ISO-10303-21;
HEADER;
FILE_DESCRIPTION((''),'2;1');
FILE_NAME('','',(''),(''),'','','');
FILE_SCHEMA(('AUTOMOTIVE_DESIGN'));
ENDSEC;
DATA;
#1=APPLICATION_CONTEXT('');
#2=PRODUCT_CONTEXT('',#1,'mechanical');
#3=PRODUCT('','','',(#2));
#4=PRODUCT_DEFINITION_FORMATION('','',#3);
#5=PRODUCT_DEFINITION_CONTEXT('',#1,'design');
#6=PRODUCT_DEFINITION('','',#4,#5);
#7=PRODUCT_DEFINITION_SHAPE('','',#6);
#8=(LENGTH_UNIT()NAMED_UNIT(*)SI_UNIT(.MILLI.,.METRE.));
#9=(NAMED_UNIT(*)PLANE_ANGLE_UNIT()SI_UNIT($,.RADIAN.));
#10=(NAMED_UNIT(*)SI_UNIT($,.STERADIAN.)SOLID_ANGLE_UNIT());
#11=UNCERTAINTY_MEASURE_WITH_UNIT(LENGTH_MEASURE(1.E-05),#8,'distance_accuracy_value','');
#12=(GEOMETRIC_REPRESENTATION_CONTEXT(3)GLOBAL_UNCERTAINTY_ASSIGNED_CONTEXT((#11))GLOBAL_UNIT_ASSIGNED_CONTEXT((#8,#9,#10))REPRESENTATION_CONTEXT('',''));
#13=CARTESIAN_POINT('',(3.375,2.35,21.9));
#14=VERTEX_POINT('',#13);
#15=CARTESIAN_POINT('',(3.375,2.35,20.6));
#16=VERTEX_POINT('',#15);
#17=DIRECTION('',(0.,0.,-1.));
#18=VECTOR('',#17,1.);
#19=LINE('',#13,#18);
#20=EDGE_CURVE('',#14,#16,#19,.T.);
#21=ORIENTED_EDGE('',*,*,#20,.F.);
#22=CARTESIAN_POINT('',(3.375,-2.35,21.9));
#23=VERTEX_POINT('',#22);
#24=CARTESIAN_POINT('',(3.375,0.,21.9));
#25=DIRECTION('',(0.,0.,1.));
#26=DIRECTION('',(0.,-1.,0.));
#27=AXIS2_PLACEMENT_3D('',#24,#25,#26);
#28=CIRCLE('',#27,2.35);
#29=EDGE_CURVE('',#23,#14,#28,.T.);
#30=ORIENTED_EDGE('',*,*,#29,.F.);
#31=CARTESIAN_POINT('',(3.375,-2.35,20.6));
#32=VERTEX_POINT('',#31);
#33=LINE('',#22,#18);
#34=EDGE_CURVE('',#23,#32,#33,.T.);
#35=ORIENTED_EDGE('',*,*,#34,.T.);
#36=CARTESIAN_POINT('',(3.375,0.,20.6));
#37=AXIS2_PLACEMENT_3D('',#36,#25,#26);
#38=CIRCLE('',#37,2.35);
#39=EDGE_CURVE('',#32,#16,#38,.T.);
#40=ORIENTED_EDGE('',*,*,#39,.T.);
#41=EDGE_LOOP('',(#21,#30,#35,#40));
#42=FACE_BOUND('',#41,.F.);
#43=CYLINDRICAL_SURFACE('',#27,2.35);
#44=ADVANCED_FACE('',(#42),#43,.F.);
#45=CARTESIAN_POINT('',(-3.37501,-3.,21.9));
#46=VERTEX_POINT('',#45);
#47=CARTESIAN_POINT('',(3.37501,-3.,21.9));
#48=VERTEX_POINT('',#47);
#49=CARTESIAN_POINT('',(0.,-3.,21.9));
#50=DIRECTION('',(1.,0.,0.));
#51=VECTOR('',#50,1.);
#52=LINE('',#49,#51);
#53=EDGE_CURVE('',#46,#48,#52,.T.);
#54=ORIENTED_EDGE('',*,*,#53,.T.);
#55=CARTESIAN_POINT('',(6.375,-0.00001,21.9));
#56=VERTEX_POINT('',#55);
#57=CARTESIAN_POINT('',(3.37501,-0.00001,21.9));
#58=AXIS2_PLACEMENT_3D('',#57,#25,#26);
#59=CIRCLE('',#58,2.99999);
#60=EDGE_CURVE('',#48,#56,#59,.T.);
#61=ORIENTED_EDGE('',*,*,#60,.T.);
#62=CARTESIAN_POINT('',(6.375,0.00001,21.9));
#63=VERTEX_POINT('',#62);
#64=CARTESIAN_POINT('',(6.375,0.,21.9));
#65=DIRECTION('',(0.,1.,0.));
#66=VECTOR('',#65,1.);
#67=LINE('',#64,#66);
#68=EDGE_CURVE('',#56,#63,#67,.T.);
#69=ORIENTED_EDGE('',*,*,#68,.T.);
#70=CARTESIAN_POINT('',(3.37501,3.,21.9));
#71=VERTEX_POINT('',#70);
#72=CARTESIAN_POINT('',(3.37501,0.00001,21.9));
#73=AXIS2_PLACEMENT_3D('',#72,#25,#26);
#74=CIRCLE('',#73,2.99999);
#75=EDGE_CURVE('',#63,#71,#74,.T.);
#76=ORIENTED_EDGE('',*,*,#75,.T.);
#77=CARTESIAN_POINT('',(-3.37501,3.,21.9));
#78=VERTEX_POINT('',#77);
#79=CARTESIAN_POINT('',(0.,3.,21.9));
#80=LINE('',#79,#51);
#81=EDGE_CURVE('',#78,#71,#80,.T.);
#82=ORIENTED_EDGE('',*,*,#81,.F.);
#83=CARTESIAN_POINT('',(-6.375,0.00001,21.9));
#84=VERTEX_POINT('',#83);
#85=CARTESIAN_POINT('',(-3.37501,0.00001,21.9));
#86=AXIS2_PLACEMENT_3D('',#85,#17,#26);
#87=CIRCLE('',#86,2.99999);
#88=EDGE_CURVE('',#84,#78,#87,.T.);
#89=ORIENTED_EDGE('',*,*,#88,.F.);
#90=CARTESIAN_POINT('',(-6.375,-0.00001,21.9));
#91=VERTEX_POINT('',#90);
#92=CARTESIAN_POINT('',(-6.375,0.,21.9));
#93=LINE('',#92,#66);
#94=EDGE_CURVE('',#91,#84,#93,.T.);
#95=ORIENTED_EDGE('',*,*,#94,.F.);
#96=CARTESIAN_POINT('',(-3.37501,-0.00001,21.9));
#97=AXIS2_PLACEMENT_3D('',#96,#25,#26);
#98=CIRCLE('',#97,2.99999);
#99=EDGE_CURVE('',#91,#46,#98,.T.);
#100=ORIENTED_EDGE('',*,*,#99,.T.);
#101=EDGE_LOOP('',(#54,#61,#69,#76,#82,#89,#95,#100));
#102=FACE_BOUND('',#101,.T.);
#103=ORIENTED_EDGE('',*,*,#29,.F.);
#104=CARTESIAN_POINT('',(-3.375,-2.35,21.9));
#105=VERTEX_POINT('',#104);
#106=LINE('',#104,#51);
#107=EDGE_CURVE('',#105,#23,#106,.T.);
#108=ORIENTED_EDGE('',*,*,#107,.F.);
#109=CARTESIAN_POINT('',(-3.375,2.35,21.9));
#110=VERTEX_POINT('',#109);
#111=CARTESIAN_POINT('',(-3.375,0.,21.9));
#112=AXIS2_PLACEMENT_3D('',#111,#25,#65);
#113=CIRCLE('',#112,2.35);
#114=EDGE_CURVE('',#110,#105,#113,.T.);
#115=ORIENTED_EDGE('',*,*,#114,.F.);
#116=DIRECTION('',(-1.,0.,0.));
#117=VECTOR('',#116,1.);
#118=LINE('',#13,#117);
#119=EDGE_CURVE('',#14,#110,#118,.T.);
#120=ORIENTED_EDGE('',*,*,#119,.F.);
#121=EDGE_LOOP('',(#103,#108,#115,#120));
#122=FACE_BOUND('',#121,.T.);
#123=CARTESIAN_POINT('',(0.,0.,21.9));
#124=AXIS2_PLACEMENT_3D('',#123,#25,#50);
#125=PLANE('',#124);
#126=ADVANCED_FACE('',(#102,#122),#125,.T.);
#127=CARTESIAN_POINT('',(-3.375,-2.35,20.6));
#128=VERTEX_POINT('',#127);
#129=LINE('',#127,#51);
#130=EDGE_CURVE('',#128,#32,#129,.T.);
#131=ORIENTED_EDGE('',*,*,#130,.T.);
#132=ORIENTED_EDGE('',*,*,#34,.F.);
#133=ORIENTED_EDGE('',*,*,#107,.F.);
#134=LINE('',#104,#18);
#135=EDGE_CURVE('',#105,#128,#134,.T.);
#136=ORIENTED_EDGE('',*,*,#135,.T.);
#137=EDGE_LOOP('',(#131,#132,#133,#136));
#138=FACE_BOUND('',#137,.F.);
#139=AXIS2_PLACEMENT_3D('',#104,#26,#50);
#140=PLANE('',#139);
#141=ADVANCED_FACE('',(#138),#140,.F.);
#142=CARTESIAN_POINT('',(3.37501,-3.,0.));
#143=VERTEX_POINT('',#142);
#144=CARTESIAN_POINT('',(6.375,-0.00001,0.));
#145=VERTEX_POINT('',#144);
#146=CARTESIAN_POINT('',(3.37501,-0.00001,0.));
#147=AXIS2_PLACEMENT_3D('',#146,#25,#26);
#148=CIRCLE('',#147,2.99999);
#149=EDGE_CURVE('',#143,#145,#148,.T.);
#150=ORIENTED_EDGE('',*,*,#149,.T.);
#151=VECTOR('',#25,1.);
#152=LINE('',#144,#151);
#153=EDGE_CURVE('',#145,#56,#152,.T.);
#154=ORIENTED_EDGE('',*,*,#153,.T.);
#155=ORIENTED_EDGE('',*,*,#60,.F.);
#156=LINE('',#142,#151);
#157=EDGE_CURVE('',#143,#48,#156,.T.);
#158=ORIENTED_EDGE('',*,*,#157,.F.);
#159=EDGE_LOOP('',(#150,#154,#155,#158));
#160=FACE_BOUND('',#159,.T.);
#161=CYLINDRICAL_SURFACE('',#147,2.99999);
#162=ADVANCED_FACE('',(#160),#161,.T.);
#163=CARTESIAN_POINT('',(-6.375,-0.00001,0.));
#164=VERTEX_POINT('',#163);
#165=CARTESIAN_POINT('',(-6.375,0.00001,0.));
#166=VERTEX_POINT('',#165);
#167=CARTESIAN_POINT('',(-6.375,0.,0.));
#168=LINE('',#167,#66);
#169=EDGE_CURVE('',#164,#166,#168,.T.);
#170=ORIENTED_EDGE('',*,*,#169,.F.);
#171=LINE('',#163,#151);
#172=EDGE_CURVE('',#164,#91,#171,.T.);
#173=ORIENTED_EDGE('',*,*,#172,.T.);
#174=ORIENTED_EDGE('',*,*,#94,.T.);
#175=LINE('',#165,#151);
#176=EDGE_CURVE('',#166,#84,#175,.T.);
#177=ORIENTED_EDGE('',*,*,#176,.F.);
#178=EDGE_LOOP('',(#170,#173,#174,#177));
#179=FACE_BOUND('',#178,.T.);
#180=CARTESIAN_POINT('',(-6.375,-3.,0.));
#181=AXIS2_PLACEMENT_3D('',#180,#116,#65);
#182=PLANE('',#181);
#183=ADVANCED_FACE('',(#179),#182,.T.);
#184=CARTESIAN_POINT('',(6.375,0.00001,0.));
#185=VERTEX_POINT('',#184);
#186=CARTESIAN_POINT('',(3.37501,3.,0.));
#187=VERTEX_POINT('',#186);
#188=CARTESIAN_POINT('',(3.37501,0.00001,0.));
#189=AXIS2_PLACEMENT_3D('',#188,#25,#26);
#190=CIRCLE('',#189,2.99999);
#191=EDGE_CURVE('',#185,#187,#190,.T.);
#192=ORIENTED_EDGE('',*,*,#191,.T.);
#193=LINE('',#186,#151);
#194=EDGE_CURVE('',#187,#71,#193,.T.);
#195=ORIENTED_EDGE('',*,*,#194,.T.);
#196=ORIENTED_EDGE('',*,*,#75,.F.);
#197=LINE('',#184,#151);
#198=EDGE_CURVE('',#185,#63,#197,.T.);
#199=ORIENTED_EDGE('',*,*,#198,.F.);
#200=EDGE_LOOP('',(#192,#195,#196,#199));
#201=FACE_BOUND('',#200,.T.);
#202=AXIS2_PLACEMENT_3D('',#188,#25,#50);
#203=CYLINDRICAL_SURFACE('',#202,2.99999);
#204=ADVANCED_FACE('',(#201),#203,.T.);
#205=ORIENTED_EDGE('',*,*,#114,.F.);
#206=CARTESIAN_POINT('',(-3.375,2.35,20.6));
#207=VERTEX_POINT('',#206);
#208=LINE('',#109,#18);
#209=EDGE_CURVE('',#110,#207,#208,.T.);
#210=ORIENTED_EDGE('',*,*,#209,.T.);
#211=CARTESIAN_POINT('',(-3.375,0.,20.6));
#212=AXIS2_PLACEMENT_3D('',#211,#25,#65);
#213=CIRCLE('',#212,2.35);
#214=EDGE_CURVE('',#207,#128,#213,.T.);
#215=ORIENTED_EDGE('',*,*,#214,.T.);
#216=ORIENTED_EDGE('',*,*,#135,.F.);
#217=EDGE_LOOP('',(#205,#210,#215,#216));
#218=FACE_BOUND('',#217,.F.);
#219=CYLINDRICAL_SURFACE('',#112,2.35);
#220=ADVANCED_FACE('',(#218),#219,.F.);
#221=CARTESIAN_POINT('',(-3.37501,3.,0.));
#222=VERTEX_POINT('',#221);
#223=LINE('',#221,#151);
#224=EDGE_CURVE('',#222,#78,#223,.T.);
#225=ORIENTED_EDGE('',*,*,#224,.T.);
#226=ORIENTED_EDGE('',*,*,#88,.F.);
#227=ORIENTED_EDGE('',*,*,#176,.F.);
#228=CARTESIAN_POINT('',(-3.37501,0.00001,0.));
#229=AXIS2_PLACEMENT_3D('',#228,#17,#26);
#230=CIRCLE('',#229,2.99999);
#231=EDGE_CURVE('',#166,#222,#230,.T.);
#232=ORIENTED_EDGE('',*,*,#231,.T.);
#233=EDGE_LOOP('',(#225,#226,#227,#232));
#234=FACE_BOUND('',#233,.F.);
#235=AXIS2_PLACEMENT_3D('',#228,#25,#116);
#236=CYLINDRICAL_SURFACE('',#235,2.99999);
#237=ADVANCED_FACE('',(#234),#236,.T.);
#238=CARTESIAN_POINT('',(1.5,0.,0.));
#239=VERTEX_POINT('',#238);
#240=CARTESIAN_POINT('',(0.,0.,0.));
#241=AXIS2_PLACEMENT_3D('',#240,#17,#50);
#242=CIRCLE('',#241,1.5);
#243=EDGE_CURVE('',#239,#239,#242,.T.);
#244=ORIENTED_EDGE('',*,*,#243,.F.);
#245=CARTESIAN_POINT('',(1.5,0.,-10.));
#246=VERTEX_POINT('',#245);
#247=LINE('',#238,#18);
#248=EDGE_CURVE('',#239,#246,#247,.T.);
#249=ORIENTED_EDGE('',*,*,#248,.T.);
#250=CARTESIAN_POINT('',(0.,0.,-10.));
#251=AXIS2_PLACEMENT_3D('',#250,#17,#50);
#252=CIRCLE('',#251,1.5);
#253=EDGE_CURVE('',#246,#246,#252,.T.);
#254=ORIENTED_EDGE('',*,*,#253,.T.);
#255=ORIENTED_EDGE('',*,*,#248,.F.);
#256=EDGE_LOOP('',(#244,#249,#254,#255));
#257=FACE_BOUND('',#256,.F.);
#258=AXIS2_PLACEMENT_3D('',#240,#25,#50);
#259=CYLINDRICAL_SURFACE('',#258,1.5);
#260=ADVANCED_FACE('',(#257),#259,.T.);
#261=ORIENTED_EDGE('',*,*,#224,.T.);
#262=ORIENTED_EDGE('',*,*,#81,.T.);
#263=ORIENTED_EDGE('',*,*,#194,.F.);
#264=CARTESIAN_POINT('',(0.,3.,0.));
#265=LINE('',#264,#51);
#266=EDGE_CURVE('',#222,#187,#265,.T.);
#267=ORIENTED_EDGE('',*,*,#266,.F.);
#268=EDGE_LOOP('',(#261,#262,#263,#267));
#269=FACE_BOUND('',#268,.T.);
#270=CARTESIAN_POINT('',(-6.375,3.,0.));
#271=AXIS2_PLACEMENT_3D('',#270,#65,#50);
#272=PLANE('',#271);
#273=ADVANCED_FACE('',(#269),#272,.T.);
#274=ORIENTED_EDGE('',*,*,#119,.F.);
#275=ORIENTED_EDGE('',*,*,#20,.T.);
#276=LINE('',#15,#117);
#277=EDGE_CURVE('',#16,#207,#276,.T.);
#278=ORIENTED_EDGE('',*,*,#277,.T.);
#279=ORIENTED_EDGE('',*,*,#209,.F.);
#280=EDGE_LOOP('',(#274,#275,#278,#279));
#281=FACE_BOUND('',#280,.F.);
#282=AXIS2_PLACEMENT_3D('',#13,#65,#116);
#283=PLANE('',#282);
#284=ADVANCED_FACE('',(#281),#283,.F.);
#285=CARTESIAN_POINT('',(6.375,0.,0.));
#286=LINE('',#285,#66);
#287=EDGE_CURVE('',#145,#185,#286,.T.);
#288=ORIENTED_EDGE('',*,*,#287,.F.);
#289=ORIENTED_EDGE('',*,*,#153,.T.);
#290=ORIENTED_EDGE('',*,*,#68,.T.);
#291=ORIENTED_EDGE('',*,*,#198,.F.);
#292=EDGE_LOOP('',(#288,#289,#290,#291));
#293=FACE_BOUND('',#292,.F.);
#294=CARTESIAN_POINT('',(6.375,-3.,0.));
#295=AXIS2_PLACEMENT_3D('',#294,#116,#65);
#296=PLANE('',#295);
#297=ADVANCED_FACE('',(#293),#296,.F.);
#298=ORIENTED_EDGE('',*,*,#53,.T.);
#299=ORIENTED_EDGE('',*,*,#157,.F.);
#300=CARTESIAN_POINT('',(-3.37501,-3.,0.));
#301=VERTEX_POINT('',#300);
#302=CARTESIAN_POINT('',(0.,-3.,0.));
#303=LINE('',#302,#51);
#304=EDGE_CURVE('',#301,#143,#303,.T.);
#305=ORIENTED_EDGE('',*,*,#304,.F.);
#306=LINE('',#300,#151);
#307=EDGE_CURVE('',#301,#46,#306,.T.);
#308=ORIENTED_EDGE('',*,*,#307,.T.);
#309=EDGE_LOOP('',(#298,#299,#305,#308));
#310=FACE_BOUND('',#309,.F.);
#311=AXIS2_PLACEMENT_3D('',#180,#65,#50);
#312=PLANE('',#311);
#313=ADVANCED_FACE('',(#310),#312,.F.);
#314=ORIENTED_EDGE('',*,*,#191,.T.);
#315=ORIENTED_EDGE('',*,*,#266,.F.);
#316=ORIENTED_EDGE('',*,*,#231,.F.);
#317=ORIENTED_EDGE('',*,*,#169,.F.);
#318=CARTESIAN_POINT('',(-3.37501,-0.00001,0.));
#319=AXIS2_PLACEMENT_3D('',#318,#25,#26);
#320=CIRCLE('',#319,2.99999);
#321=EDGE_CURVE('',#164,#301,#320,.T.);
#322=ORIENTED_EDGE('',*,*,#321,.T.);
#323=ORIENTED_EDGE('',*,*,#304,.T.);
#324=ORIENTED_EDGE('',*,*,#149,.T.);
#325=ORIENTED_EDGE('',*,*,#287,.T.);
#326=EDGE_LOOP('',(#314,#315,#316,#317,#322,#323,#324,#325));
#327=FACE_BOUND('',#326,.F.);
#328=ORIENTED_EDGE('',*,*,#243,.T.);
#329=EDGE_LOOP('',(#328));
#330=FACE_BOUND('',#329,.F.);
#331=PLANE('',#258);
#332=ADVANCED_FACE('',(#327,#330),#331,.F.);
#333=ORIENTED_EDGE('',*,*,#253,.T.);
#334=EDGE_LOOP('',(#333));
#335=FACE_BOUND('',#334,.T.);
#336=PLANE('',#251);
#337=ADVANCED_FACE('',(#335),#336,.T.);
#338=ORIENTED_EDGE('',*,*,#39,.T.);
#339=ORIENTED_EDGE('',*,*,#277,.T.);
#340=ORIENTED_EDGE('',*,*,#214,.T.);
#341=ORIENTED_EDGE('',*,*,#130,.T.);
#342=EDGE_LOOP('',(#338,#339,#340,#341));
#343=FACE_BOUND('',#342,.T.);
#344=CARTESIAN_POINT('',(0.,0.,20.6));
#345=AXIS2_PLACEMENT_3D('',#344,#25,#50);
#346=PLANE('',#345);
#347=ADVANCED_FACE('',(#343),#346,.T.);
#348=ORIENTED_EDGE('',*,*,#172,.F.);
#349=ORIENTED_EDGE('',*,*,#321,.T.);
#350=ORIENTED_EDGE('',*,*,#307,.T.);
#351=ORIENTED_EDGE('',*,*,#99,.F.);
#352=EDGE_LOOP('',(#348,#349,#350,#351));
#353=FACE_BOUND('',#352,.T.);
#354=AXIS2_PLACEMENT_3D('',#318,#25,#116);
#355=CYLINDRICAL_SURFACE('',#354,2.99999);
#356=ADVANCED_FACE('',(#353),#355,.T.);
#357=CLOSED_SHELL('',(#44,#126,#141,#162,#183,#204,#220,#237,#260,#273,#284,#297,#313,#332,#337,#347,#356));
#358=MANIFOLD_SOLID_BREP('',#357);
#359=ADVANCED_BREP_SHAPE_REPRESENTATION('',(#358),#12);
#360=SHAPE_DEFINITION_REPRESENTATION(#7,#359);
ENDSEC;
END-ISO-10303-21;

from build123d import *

# Parameters (mm, degrees)
F0_W     = 12.75
F0_H     = 6
F1_DEPTH = 21.9
F2_R     = 2.99999
F3_R     = 1.5
F4_DEPTH = 10
F6_DEPTH = 1.3


# Not quite as in the source:
# - a fillet or chamfer is up to 0.001 mm smaller than in the source, because OpenCascade refuses the exact size


with BuildPart() as f1:
    # F0 (on Top) → F1 (new body)
    with BuildSketch(Plane.XY):
        Rectangle(F0_W, F0_H)
    extrude(amount=F1_DEPTH)

    # F2 (radius 3 in the source; OpenCascade refuses exactly that, so slightly less here)
    f2_edges = [f1.edges().sort_by_distance(p)[0] for p in [
        (-6.375, -3, 10.95),
        (-6.375, 3, 10.95),
        (6.375, -3, 10.95),
        (6.375, 3, 10.95),
    ]]
    fillet(f2_edges, radius=F2_R)

    # F3 (on face) → F4 (join)
    with BuildSketch(Plane(origin=(0, 0, 0), x_dir=(1, 0, 0), z_dir=(0, 0, -1))):
        Circle(F3_R)
    extrude(amount=F4_DEPTH)

    # F5 (on face) → F6 (cut)
    with BuildSketch(Plane.XY.offset(21.9)):
        with BuildLine():
            Line((3.375, 2.35), (-3.375, 2.35))
            ThreePointArc((-3.375, 2.35), (-5.725, 0), (-3.375, -2.35))
            Line((-3.375, -2.35), (3.375, -2.35))
            ThreePointArc((3.375, -2.35), (5.725, 0), (3.375, 2.35))
        make_face()
    extrude(amount=-F6_DEPTH, mode=Mode.SUBTRACT)


solid = f1.part
